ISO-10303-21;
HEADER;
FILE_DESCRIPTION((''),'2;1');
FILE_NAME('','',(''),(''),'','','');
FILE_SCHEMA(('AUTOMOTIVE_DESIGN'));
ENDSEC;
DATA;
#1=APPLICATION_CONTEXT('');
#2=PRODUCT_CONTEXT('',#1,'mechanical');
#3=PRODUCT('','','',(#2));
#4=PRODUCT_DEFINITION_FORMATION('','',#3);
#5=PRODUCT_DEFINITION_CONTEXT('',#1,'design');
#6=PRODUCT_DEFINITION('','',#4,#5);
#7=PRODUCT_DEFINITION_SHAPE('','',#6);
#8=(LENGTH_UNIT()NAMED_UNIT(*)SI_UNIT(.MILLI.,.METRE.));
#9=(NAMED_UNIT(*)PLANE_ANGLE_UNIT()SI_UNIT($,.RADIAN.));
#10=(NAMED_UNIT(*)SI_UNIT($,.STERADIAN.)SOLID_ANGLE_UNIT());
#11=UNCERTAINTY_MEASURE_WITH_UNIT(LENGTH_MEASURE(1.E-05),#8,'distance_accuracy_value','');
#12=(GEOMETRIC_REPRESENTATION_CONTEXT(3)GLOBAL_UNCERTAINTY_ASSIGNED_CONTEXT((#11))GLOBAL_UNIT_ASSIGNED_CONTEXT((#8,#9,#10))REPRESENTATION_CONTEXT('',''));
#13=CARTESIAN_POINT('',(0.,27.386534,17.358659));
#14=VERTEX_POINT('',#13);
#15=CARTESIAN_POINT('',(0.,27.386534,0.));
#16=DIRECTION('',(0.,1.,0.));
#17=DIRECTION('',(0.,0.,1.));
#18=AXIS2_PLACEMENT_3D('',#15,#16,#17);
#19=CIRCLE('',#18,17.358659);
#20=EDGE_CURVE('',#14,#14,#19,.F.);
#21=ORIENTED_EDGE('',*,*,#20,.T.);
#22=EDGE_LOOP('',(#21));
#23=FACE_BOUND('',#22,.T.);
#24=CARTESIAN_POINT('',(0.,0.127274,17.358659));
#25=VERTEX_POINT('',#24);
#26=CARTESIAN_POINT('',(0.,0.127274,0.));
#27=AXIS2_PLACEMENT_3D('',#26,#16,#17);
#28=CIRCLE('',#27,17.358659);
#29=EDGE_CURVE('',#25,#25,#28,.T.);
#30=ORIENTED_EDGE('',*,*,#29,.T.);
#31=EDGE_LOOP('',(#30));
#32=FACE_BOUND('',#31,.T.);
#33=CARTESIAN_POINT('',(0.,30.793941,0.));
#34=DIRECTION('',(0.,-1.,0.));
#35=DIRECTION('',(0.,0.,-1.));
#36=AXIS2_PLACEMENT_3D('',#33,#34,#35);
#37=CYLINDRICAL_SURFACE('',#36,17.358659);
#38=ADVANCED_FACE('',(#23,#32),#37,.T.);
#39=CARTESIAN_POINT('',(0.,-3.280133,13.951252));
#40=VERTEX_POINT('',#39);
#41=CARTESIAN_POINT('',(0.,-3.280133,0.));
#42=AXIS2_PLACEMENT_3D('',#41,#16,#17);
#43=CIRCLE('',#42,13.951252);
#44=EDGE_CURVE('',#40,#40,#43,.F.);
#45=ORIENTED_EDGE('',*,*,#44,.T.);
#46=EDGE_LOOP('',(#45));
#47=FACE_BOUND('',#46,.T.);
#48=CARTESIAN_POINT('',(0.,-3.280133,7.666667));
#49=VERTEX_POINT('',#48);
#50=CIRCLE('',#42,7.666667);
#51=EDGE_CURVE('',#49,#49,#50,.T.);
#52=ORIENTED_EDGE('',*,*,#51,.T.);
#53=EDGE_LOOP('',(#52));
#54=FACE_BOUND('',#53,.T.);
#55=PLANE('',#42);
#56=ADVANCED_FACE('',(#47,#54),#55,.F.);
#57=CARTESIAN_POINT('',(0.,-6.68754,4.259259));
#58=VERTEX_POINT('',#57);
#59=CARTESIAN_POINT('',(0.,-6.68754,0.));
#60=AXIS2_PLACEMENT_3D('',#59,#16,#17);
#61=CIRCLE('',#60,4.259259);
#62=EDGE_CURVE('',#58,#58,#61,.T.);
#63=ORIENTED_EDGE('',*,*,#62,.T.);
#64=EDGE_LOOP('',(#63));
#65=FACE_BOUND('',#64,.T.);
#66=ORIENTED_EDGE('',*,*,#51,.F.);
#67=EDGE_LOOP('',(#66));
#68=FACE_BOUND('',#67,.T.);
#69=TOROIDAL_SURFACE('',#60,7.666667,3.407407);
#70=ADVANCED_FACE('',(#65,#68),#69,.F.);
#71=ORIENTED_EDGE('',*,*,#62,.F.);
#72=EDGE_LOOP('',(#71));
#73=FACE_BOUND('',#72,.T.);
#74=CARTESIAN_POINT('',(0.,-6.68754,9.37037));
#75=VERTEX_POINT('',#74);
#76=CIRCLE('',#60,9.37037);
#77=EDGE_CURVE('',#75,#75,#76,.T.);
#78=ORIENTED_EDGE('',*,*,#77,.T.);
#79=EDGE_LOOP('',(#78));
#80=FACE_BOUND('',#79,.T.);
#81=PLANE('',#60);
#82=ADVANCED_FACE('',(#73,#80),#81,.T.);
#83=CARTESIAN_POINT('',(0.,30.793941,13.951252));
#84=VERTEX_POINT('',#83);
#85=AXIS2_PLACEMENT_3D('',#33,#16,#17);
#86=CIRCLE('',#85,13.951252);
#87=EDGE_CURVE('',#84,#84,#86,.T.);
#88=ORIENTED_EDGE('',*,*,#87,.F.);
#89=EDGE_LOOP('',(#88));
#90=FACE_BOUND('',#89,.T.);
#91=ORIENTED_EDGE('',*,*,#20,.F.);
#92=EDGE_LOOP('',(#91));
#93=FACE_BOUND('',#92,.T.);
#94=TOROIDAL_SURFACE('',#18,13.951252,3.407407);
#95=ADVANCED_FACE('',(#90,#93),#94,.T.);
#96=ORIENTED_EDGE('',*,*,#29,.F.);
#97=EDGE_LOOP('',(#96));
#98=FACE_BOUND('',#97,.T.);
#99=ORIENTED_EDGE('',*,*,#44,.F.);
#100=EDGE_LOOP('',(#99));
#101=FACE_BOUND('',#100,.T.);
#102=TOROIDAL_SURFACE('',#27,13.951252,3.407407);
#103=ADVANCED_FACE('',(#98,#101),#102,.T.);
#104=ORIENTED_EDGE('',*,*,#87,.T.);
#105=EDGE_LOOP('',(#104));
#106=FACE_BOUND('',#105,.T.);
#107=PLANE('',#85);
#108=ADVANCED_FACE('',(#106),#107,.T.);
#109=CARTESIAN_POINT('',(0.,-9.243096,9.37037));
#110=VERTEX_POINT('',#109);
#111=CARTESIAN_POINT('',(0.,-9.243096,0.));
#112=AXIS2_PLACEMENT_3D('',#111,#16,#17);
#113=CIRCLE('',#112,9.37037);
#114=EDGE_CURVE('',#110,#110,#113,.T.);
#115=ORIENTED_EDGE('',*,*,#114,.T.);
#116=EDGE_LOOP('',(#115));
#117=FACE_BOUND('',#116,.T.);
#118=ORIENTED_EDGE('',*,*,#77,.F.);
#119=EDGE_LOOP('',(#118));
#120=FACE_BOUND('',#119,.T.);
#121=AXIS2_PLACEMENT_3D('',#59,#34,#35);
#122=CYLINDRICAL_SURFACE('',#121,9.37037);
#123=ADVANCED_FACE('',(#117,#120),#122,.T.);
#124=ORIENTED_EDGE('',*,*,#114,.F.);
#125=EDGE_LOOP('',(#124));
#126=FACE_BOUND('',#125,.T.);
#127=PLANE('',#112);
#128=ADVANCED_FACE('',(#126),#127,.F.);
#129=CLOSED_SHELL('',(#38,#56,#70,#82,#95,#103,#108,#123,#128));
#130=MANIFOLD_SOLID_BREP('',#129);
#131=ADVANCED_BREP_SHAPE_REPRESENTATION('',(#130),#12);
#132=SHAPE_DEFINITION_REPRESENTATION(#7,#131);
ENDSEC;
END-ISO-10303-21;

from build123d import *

# Parameters (mm, degrees)
SKETCH_1_R      = 5.5
EXTRUDE_1_DEPTH = 1.5
SKETCH_2_R      = 2.5
EXTRUDE_2_DEPTH = 2
SKETCH_3_R      = 10.188778254
EXTRUDE_3_DEPTH = 20
FILLET_2_R      = 2
FILLET_3_R      = 2
SCALE_1_SCALE   = 1.703703703


with BuildPart() as part:
    # 草图1 → 凸台-拉伸1 (new body)
    with BuildSketch(Plane(origin=(0, 0, 0), x_dir=(1, 0, 0), z_dir=(0, 1, 0))):
        with Locations(Location((0, 0, 0), (0, 0, 270))):
            Circle(SKETCH_1_R)
    extrude(amount=EXTRUDE_1_DEPTH)

    # 草图2 → 凸台-拉伸2 (add)
    with BuildSketch(Plane(origin=(0, 1.5, 0), x_dir=(1, 0, 0), z_dir=(0, 1, 0))):
        with Locations(Location((0, 0, 0), (0, 0, 270))):
            Circle(SKETCH_2_R)
    extrude(amount=EXTRUDE_2_DEPTH)

    # 草图3 → 凸台-拉伸3 (add)
    with BuildSketch(Plane(origin=(0, 3.5, 0), x_dir=(1, 0, 0), z_dir=(0, 1, 0))):
        with Locations(Location((0, 0, 0), (0, 0, 270))):
            Circle(SKETCH_3_R)
    extrude(amount=EXTRUDE_3_DEPTH)

    # 圆角2
    fillet_2_edges = [part.edges().sort_by_distance(p)[0] for p in [
        (0, 23.5, -10.188778254),
    ]]
    fillet(fillet_2_edges, radius=FILLET_2_R)

    # 圆角3
    fillet_3_edges = [part.edges().sort_by_distance(p)[0] for p in [
        (0, 3.5, -2.5),
        (0, 3.5, -10.188778254),
    ]]
    fillet(fillet_3_edges, radius=FILLET_3_R - 0.0001)  # a hair under: the kernel refuses the full size


with BuildPart() as part_1:
    # 缩放比例1: scaled about (0, 13.134921616, 0)
    add(part.part.scale(SCALE_1_SCALE).moved(Location((0, -9.243092979, 0))))


solid = part_1.part
